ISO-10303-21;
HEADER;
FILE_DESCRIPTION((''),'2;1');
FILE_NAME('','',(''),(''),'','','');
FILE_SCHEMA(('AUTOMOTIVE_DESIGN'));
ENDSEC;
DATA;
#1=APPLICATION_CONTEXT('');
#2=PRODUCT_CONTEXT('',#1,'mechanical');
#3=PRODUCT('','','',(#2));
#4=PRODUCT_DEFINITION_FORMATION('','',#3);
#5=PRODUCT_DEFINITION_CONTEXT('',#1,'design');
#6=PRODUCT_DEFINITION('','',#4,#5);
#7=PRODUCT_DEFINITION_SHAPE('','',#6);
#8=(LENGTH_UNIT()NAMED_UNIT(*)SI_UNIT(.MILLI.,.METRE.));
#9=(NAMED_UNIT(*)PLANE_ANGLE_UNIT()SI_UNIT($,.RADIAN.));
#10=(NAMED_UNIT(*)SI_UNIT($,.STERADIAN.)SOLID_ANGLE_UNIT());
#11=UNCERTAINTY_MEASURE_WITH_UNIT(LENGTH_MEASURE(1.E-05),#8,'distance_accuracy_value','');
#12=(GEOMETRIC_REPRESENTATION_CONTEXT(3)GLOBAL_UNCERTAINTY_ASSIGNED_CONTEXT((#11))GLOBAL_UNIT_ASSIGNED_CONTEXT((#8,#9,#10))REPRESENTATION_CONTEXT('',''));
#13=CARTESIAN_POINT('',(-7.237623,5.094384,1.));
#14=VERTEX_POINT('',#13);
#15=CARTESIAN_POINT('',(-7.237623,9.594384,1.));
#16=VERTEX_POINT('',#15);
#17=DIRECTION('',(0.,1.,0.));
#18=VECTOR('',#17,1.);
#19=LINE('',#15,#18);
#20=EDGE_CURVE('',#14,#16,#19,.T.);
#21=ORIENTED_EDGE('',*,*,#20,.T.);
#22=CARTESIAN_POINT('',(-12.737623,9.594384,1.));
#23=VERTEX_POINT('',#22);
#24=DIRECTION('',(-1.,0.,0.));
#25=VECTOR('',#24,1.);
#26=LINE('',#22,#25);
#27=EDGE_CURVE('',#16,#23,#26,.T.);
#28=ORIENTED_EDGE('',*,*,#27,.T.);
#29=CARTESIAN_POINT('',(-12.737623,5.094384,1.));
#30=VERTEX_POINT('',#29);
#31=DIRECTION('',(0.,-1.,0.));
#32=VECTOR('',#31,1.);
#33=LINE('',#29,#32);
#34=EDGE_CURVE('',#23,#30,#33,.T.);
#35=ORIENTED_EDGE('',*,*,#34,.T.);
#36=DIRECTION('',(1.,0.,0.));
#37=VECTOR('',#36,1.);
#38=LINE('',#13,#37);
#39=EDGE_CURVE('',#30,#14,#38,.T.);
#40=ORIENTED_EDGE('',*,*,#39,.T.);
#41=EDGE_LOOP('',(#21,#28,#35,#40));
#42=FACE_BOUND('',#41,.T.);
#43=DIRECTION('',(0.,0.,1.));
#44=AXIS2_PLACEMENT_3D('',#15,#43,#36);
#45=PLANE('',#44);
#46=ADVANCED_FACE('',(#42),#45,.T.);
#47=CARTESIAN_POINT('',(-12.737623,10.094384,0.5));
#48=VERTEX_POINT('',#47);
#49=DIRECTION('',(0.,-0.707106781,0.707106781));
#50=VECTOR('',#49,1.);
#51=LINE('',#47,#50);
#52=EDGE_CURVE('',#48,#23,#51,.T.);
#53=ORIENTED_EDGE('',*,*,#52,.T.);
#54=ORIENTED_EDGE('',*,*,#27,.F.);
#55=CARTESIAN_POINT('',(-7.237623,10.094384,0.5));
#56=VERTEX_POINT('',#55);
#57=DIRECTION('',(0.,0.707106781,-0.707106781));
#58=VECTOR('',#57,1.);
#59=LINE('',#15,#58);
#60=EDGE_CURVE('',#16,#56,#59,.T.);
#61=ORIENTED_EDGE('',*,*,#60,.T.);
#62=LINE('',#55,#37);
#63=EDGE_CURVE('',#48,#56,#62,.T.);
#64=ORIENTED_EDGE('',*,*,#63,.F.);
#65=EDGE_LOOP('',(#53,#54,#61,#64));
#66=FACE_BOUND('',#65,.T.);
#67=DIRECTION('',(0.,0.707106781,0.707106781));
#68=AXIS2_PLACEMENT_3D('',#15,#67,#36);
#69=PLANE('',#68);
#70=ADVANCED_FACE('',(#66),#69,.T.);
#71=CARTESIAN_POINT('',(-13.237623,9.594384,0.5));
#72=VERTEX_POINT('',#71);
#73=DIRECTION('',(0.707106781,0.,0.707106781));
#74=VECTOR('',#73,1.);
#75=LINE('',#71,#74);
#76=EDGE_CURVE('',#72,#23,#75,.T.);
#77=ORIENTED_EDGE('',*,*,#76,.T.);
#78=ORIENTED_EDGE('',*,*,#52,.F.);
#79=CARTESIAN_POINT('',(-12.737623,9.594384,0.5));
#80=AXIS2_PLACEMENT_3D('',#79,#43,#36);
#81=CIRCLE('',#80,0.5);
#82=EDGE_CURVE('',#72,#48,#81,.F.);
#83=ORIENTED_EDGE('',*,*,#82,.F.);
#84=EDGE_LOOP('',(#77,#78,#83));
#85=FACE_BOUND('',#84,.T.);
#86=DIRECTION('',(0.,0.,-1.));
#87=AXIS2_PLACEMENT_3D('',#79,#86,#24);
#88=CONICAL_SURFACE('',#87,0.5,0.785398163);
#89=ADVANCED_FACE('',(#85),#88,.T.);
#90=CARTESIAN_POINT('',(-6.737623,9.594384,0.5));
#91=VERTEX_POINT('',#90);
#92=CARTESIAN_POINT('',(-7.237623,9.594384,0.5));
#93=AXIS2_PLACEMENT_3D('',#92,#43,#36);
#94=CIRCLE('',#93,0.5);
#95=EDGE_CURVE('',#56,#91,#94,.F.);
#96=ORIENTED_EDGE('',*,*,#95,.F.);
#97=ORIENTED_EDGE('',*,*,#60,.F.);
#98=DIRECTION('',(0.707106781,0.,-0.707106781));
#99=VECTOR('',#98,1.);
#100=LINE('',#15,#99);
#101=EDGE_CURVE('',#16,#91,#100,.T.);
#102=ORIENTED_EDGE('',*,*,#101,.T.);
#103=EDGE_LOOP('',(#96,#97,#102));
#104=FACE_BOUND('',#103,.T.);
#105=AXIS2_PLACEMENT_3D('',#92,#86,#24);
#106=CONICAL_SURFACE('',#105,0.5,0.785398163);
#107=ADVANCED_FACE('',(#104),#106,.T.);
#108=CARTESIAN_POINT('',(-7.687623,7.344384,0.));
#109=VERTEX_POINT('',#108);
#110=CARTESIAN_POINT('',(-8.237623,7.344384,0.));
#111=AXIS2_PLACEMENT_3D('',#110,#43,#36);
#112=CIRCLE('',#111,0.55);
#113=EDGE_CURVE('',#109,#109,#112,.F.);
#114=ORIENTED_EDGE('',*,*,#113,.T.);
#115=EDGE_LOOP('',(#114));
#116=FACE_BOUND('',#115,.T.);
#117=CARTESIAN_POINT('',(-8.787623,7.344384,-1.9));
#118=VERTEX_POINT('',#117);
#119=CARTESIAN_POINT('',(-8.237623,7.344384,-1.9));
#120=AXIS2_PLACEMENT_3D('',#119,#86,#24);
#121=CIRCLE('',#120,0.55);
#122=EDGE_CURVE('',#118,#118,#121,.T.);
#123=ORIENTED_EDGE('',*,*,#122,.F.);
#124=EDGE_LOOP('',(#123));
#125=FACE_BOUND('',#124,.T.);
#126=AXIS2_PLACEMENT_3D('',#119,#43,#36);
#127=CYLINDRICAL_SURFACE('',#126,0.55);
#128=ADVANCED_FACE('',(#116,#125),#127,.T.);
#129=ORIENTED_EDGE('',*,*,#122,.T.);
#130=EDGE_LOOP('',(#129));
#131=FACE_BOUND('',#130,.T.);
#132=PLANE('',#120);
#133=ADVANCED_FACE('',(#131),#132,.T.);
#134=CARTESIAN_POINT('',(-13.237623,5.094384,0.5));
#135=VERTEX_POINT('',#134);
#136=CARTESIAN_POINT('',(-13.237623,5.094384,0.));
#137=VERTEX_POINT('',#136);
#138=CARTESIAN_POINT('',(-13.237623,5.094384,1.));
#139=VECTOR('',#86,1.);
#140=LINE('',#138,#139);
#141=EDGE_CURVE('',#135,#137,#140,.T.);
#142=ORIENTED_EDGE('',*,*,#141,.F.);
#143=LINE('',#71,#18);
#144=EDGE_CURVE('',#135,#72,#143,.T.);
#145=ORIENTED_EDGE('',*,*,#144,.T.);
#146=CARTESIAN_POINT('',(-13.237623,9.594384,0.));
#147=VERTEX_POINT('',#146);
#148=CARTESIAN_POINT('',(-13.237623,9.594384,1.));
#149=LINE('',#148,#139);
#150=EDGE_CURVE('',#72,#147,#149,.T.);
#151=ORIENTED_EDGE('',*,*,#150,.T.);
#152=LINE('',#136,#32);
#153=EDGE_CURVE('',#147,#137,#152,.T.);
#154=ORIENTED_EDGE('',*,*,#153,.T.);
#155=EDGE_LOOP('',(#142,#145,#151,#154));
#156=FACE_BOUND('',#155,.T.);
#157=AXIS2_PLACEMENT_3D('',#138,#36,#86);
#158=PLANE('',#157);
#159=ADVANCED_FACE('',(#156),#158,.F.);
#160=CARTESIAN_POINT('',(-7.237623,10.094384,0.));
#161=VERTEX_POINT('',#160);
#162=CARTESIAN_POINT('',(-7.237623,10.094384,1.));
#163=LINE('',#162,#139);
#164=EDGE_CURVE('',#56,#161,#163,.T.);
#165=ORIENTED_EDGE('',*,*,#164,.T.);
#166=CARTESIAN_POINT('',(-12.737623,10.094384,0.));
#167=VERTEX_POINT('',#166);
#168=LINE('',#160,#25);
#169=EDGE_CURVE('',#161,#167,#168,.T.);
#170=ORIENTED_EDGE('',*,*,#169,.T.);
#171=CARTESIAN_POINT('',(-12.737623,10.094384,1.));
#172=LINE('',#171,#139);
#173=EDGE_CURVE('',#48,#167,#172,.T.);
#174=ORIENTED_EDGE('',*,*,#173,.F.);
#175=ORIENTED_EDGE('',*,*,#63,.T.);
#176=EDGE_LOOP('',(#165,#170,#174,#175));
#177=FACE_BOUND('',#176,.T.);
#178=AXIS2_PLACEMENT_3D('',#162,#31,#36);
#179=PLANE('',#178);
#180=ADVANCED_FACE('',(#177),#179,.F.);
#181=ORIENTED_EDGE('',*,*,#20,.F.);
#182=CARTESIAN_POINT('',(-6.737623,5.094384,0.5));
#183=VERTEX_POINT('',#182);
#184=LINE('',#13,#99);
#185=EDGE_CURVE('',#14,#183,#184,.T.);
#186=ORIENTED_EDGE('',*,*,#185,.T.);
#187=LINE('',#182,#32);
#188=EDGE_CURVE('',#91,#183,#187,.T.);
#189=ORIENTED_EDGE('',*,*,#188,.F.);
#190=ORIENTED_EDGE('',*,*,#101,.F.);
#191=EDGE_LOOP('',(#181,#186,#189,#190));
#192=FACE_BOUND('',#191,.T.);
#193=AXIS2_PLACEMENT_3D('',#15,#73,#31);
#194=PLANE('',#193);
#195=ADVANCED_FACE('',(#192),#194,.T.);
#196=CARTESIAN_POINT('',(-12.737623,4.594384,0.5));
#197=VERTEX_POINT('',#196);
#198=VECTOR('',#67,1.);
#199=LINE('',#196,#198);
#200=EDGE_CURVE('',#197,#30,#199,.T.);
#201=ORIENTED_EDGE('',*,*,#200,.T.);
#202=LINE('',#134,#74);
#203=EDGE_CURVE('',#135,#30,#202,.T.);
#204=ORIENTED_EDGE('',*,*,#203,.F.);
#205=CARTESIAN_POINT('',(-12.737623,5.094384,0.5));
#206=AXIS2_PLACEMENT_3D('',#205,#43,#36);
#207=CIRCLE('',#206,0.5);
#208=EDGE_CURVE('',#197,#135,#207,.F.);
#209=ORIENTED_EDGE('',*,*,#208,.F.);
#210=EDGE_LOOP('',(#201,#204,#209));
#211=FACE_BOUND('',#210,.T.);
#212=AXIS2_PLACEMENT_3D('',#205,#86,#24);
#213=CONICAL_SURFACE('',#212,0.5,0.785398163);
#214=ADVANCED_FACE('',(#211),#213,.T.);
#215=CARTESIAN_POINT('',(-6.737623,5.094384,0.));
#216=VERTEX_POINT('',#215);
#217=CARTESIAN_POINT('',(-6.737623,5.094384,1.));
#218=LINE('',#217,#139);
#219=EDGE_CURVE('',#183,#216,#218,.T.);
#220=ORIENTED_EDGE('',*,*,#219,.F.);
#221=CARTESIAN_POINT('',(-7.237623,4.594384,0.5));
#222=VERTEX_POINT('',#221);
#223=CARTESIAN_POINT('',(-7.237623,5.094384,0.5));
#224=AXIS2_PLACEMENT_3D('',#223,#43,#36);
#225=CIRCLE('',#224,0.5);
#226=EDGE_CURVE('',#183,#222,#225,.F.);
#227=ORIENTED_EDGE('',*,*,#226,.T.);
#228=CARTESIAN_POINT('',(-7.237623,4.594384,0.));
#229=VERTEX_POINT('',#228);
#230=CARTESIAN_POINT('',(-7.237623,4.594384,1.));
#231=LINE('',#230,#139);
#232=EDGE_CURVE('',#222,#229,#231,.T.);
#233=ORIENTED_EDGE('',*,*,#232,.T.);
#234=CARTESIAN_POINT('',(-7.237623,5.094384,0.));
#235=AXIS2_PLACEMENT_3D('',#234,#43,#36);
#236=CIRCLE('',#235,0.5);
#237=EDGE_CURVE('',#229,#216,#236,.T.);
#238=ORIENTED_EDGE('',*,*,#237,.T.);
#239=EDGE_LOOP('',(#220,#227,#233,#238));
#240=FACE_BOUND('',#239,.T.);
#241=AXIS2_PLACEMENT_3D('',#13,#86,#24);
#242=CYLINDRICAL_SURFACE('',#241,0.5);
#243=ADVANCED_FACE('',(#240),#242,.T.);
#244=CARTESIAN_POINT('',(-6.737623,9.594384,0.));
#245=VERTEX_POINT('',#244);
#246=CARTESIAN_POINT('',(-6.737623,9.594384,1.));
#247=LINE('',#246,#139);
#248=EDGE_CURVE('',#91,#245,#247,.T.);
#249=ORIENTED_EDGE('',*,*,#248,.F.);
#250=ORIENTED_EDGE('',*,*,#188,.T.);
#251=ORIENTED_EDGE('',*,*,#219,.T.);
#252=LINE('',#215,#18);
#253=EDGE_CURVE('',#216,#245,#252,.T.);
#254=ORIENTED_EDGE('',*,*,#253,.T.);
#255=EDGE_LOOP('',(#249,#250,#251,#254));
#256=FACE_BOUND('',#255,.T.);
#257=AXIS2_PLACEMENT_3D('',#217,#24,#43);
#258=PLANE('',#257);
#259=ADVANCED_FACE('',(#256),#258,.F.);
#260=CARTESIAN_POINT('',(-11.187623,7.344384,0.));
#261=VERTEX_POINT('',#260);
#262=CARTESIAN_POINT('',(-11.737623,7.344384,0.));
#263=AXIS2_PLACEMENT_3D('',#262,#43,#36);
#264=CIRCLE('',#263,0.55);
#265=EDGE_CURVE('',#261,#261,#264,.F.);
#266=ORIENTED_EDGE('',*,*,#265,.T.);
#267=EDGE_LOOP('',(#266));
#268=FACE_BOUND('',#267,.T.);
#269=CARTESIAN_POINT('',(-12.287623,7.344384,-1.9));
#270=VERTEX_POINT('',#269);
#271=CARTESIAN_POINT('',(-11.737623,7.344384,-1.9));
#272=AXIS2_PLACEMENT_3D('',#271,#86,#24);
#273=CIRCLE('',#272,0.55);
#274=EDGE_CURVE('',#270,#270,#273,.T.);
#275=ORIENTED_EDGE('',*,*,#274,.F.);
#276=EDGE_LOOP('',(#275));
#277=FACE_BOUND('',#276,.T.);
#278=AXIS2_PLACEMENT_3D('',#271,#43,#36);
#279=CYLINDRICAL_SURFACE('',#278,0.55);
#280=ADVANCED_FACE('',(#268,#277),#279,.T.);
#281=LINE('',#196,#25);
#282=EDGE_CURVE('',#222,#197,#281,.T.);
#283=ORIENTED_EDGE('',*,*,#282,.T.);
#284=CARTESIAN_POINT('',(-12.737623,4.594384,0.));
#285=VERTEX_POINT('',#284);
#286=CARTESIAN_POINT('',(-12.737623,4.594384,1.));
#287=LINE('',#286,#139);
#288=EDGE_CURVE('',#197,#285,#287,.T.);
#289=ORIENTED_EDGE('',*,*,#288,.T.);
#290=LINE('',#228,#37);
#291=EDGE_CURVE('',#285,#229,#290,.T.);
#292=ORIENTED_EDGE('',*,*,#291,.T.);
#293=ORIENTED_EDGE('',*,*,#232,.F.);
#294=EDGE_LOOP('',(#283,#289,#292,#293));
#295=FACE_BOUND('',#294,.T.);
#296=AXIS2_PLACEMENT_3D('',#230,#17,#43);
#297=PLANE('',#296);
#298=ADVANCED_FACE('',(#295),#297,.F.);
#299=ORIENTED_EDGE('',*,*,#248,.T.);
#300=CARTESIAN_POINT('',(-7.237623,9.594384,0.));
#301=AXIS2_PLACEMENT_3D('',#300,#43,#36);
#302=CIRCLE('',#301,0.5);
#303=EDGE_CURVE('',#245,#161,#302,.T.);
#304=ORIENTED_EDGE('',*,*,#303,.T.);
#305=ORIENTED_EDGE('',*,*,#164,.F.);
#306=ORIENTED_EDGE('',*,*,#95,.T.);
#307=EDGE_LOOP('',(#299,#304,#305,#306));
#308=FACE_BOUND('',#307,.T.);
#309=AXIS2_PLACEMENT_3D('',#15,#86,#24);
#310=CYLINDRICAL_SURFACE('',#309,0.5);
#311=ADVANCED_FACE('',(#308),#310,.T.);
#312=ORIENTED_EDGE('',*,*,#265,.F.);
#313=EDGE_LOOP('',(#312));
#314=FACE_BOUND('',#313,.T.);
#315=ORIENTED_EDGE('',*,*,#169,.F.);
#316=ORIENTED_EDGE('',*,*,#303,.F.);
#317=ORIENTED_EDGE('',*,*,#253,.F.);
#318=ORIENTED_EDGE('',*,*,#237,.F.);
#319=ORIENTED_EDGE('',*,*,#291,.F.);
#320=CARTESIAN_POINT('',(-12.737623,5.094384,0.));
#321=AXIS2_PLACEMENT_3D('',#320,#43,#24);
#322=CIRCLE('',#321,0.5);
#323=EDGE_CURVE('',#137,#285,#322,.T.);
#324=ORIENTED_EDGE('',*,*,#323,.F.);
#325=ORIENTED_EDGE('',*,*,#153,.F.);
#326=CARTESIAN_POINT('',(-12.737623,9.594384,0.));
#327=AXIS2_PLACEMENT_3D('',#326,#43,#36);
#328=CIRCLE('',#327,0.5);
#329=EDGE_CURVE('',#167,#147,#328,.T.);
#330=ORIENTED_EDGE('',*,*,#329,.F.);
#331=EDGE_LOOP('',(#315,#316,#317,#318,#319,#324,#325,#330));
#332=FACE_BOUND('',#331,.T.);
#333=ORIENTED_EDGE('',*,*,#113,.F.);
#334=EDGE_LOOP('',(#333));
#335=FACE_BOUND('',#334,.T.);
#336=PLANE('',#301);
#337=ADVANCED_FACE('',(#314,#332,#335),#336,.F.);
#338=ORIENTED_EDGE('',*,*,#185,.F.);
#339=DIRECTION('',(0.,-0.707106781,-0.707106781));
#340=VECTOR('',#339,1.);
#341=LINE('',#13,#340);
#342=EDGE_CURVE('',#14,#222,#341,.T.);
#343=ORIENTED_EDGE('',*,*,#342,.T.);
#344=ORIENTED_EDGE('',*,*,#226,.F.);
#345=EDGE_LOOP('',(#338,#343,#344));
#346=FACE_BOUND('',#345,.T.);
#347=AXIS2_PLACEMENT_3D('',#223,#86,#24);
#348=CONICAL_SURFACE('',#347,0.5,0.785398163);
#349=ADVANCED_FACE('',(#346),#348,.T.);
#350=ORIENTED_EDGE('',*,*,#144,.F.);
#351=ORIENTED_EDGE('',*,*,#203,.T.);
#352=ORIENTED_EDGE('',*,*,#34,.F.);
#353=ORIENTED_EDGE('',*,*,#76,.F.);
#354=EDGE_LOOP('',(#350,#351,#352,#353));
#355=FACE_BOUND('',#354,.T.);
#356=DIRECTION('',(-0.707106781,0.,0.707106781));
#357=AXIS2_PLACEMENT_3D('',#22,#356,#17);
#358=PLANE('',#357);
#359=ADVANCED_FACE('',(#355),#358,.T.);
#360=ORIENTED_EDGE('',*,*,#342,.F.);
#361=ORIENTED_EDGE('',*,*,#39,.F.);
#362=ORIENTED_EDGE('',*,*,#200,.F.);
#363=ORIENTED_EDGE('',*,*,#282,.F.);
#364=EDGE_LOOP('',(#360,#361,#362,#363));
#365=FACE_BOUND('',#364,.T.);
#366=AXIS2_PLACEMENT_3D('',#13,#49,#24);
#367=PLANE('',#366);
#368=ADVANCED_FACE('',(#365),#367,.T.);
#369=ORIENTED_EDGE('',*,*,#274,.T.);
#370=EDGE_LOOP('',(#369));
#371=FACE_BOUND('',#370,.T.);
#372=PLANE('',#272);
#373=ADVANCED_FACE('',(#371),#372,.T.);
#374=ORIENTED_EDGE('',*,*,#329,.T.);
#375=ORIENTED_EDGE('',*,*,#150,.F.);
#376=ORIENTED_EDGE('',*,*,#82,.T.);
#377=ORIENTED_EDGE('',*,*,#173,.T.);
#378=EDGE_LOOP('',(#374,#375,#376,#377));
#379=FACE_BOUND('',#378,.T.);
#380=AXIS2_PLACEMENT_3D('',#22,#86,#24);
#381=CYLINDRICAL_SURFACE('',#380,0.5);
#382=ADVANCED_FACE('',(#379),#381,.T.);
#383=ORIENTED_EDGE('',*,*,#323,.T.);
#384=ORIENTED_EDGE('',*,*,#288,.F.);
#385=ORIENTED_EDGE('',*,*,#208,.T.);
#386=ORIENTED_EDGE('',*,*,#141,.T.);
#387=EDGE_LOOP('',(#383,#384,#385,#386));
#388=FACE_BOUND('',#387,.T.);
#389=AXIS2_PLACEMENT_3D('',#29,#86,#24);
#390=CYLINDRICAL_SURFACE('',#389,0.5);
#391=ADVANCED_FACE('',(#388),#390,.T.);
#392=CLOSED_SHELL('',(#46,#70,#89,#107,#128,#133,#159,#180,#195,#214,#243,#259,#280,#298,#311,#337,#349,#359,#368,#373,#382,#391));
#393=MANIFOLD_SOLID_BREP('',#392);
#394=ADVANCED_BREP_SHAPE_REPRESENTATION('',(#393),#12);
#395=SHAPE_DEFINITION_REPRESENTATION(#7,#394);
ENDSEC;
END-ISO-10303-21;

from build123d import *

# Parameters (mm, degrees)
EXTRUDE_1_DEPTH = 1
CHAMFER_1_SIZE  = 0.5
SKETCH_2_R      = 0.55
EXTRUDE_2_DEPTH = 1.9


with BuildPart() as part:
    # 草图1 → 凸台-拉伸1 (new body)
    with BuildSketch(Plane.XY):
        with BuildLine():
            Line((-7.237622799, 4.594383921), (-12.737622799, 4.594383921))
            ThreePointArc((-12.737622799, 4.594383921), (-13.091176189, 4.74083053), (-13.237622799, 5.094383921))
            Line((-13.237622799, 5.094383921), (-13.237622799, 9.594383921))
            ThreePointArc((-13.237622799, 9.594383921), (-13.091176189, 9.947937312), (-12.737622799, 10.094383921))
            Line((-12.737622799, 10.094383921), (-7.237622799, 10.094383921))
            ThreePointArc((-7.237622799, 10.094383921), (-6.884069408, 9.947937312), (-6.737622799, 9.594383921))
            Line((-6.737622799, 9.594383921), (-6.737622799, 5.094383921))
            ThreePointArc((-6.737622799, 5.094383921), (-6.884069408, 4.74083053), (-7.237622799, 4.594383921))
        make_face()
    extrude(amount=EXTRUDE_1_DEPTH)

    # 倒角1
    chamfer_1_edges = [part.edges().sort_by_distance(p)[0] for p in [
        (-13.091176189, 9.947937312, 1),
        (-13.237622799, 7.344383921, 1),
        (-13.091176189, 4.74083053, 1),
        (-9.987622799, 4.594383921, 1),
        (-6.884069408, 4.74083053, 1),
        (-6.737622799, 7.344383921, 1),
        (-6.884069408, 9.947937312, 1),
        (-9.987622799, 10.094383921, 1),
    ]]
    chamfer(chamfer_1_edges, length=CHAMFER_1_SIZE - 0.0001)  # a hair under: the kernel refuses the full size

    # 草图2 → 凸台-拉伸2 (add)
    with BuildSketch(Plane(origin=(0, 0, 0), x_dir=(-1, 0, 0), z_dir=(0, 0, -1))):
        with Locations(Location((11.737622799, 7.344383921, 0), (0, 0, 180))):
            Circle(SKETCH_2_R)
        with Locations(Location((8.237622799, 7.344383921, 0), (0, 0, 180))):
            Circle(SKETCH_2_R)
    extrude(amount=EXTRUDE_2_DEPTH)


solid = part.part
